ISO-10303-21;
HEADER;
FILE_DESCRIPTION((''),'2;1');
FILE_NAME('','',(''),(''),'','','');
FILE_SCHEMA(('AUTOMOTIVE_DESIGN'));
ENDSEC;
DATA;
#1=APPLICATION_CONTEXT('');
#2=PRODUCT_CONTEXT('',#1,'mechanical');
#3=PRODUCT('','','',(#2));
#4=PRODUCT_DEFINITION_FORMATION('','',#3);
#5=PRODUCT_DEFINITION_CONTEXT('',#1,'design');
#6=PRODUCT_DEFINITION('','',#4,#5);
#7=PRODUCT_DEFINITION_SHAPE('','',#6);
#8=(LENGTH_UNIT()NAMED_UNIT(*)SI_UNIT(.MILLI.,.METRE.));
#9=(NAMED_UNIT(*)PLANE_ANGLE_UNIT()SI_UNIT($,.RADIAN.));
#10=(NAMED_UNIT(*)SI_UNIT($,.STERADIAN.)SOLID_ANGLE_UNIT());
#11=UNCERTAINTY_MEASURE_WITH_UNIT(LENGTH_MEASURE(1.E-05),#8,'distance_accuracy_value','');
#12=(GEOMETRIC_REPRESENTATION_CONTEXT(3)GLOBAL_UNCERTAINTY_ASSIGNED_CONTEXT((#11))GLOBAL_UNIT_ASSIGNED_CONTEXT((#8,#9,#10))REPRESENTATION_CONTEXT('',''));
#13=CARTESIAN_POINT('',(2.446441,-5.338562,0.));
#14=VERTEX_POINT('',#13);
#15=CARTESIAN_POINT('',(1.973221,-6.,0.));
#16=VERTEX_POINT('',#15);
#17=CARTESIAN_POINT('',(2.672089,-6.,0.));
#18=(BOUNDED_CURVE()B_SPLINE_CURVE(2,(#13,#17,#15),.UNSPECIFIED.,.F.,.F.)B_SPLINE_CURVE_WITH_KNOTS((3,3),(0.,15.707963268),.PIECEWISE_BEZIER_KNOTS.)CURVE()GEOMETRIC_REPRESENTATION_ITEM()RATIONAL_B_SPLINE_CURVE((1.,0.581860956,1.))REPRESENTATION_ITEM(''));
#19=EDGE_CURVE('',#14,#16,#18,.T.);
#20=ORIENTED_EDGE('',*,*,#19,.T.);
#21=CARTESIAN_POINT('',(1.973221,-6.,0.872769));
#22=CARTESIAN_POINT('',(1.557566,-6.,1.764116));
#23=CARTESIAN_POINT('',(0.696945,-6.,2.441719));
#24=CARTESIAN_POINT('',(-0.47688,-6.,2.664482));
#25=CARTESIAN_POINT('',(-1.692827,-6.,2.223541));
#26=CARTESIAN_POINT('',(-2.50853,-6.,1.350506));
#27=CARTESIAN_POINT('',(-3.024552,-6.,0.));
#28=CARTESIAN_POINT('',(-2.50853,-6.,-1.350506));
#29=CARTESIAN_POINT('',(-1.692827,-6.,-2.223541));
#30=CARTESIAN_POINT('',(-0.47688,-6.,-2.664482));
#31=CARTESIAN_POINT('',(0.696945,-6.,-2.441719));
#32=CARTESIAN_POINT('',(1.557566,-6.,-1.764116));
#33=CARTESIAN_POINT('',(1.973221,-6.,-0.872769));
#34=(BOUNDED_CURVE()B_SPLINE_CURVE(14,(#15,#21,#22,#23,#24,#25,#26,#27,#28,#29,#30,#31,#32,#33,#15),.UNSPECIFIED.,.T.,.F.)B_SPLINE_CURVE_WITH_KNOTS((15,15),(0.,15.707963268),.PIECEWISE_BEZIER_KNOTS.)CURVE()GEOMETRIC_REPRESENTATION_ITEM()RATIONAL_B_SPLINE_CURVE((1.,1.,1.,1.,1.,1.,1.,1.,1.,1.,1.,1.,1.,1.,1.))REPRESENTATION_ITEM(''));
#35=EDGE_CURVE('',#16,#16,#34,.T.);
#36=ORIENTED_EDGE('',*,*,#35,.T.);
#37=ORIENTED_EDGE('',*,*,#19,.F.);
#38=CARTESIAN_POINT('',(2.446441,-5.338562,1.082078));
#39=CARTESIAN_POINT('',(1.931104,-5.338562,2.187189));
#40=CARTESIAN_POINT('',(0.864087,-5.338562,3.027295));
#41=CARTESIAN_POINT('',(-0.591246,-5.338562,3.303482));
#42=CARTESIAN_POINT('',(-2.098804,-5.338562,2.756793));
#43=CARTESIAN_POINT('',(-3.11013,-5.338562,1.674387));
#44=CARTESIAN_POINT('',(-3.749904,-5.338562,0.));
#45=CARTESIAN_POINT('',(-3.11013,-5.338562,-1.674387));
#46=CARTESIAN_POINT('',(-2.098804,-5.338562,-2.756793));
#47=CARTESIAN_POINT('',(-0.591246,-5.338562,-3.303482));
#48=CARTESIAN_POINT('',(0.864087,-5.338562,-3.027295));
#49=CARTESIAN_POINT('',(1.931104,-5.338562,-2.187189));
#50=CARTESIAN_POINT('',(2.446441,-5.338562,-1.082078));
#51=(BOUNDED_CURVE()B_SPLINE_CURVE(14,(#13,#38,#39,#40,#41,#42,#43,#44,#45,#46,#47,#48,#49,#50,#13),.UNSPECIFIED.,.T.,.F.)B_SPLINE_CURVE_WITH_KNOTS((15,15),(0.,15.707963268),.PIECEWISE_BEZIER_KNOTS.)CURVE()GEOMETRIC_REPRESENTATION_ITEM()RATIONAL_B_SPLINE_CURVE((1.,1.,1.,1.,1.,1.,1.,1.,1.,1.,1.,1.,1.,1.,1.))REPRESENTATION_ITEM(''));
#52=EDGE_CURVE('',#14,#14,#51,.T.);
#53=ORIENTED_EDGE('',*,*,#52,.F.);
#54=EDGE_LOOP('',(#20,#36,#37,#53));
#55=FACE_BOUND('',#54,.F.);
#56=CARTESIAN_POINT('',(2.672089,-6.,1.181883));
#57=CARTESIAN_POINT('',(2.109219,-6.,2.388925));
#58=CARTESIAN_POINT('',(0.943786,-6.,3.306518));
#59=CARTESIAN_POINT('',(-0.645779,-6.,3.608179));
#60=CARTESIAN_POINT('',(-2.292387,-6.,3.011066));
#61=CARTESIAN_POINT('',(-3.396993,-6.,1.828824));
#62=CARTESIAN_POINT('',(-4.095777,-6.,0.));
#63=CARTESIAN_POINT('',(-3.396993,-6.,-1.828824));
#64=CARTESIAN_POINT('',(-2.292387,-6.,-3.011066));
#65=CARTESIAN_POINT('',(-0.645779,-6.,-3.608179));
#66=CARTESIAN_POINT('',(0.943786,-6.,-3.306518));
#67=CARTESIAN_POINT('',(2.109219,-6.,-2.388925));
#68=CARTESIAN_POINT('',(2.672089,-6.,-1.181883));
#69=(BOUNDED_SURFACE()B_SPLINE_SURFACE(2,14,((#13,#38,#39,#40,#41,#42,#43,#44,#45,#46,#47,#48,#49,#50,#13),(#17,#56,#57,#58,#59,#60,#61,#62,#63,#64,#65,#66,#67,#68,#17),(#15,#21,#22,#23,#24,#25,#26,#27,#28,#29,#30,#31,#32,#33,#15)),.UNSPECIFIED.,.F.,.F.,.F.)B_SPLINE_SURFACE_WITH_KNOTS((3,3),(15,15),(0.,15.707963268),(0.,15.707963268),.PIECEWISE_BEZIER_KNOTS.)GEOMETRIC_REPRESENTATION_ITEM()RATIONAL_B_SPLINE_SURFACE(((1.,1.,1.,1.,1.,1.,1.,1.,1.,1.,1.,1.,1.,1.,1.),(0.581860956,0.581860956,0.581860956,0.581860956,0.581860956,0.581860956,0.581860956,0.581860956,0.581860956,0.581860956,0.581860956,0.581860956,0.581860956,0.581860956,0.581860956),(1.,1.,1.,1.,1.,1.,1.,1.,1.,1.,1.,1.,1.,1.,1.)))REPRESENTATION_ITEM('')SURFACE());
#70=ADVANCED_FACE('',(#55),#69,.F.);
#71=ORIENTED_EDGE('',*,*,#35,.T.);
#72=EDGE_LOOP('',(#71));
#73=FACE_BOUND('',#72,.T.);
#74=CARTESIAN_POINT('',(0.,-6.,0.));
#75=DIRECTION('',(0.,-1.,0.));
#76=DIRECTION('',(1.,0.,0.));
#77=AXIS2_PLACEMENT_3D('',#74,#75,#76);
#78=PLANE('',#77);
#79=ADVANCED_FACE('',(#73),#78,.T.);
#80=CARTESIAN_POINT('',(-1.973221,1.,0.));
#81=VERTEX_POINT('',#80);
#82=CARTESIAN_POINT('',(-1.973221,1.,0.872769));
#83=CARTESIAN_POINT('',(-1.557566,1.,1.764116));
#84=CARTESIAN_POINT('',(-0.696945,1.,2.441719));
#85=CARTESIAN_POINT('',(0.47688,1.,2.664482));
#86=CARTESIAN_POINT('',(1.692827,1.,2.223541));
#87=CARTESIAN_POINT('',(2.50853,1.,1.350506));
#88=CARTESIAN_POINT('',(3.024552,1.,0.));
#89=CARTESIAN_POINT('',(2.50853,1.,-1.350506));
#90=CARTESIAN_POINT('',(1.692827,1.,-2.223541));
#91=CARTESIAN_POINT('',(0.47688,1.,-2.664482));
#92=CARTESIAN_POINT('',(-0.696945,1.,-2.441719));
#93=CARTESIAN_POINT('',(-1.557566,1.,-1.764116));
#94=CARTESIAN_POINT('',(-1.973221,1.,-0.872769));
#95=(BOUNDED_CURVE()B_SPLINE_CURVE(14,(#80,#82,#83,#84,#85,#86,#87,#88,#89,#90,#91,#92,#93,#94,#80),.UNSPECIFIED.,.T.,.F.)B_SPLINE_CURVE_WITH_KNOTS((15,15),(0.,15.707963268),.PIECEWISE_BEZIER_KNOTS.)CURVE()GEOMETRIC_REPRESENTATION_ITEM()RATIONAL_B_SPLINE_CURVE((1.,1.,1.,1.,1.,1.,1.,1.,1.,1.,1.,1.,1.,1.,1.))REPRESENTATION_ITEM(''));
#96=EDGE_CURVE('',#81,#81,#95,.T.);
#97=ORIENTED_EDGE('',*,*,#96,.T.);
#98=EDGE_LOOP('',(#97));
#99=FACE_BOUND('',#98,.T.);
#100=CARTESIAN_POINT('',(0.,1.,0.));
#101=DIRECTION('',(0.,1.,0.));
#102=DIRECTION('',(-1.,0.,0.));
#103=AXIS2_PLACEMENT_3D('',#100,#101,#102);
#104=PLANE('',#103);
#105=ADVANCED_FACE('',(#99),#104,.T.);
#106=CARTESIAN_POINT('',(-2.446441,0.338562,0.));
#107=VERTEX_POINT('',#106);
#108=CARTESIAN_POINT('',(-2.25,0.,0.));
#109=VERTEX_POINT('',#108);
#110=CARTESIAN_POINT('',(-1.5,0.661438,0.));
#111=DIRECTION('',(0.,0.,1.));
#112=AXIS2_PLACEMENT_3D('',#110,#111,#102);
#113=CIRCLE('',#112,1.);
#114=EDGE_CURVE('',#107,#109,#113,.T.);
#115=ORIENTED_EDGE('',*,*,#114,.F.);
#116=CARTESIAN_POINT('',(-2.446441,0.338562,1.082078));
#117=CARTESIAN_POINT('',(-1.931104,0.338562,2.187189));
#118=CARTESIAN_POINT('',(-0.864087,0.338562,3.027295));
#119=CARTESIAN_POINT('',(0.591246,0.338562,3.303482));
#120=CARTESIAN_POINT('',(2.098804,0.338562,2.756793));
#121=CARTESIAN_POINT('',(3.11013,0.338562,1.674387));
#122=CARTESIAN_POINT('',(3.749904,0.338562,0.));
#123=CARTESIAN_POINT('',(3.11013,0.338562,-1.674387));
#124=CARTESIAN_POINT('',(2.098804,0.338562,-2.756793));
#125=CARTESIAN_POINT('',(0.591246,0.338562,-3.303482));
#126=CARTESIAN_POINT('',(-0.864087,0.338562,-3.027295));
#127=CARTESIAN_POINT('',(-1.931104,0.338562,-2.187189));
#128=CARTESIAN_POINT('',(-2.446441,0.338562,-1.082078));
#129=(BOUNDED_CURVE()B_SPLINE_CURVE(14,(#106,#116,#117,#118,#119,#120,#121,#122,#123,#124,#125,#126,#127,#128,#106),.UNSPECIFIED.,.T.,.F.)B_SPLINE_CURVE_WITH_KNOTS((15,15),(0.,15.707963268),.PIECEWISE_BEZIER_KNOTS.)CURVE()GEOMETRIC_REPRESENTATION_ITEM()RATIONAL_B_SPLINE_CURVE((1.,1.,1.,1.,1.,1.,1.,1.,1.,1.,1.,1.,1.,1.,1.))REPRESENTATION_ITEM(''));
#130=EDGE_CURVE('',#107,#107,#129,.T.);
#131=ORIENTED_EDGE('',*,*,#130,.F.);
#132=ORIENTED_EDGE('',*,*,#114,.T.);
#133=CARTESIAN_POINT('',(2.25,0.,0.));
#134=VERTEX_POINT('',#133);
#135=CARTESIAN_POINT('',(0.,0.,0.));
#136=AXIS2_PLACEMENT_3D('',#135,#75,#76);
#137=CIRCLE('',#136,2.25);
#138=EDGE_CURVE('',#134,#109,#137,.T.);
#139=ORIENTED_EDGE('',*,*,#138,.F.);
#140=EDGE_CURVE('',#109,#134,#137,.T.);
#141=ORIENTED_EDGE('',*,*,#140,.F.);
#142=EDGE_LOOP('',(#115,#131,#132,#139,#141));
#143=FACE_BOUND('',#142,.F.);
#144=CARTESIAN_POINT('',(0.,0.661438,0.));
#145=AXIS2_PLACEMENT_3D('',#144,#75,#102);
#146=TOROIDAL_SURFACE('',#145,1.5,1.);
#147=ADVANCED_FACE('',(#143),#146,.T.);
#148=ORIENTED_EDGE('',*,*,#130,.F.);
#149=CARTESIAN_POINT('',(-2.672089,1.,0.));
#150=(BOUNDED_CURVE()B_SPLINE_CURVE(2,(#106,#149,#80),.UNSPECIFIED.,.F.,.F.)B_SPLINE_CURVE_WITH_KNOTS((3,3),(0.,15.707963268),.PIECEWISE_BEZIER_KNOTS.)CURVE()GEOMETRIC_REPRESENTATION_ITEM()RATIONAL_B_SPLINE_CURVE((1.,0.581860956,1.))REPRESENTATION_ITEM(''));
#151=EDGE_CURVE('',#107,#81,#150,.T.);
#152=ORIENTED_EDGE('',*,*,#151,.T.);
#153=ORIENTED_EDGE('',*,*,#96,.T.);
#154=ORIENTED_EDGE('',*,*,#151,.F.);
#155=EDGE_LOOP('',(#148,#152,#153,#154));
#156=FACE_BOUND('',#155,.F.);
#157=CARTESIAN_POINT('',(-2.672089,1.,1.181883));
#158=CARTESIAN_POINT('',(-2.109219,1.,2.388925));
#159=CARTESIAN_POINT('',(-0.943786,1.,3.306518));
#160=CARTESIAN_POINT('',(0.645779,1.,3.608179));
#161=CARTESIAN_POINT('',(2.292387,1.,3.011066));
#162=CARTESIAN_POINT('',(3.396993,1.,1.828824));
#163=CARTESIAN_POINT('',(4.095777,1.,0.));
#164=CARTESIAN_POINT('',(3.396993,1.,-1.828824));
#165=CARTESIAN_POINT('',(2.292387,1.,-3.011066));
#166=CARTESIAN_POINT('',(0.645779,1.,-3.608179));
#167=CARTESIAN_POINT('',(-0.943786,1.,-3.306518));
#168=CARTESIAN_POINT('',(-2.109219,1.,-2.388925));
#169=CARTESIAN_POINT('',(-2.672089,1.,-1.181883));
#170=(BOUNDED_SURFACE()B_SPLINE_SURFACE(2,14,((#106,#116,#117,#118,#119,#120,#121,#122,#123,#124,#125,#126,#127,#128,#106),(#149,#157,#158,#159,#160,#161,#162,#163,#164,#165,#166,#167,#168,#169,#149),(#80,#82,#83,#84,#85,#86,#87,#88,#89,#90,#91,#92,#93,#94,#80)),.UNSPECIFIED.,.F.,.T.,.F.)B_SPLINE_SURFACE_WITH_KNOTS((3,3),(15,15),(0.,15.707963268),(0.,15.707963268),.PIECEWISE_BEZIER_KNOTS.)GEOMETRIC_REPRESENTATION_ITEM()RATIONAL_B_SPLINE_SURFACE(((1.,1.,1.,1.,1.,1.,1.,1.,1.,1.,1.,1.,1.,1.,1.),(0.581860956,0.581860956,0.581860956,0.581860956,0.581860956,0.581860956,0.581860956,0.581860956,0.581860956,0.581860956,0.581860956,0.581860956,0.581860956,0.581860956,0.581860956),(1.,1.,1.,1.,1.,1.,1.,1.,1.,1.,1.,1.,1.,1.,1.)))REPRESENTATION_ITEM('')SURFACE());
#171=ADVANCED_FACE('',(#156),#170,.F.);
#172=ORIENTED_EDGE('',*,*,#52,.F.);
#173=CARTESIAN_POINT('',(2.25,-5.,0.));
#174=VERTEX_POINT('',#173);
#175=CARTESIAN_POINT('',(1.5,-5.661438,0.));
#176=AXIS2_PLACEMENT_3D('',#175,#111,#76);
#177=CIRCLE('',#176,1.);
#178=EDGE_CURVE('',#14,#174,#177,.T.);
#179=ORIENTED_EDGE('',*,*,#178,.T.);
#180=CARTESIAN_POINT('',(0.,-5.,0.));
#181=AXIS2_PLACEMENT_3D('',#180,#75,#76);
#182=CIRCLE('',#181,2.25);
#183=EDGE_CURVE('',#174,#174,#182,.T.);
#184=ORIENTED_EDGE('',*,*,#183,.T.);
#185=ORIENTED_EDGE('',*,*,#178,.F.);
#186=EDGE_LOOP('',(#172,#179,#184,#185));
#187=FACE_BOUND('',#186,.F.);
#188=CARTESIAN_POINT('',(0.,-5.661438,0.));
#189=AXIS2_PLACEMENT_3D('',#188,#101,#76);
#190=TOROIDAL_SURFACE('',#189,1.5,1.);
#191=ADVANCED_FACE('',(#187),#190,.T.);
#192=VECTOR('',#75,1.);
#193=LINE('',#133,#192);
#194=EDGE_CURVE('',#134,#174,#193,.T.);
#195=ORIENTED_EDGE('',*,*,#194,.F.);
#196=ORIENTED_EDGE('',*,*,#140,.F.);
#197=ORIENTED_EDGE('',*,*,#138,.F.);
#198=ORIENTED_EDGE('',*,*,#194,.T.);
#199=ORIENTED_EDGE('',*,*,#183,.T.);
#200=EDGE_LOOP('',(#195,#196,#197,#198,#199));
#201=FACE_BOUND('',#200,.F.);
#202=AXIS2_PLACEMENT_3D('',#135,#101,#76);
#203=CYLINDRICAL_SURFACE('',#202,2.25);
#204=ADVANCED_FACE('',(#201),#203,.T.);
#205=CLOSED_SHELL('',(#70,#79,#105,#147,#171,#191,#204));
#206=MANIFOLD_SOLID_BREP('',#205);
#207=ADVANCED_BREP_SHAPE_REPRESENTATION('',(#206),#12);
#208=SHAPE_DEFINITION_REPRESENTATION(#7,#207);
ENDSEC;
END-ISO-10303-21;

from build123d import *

# Parameters (mm, degrees)
F0_R     = 2.25
F1_DEPTH = 5
F2_R     = 2.5
F2_R_2   = 2.25
F3_DEPTH = 1
F5_R     = 0.5
F6_R     = 2.5
F6_R_2   = 2.25
F7_DEPTH = 1
F9_R     = 0.5


# Not quite as in the source:
# - a fillet or chamfer that OpenCascade refuses, or shapes differently, is made with other operations: its cross-section is extruded or revolved along the edge and cut away or added


with BuildPart() as f1:
    # F0 (on Front) → F1 (new body)
    with BuildSketch(Plane.XZ):
        Circle(F0_R)
    extrude(amount=F1_DEPTH)

    # F2 (on face) → F3 (join)
    with BuildSketch(Plane.XZ.offset(5)):
        Circle(F2_R)
        Circle(F2_R_2, mode=Mode.SUBTRACT)
        Circle(F2_R_2)
    extrude(amount=F3_DEPTH)

    # F4: fillet of radius 1 on 1 edges, made by hand

    # F4_s1 → F4_t2 (revolve, cut)
    with BuildSketch(Plane.XY):
        with BuildLine():
            ThreePointArc((2.5, -5.6614378278), (2.4354143467, -5.3078844372), (2.25, -5))
            Line((2.25, -5), (2.5, -5))
            Line((2.5, -5), (2.5, -5.6614378278))
        make_face()
    revolve(axis=Axis((0, -5, 0), (0, -1, 0)), mode=Mode.SUBTRACT)

    # F5
    f5_edges = [f1.edges().sort_by_distance(p)[0] for p in [
        (-2.5, -6, 0),
    ]]
    fillet(f5_edges, radius=F5_R)

    # F6 (on face) → F7 (join)
    with BuildSketch(Plane(origin=(0, 0, 0), x_dir=(-1, 0, 0), z_dir=(0, 1, 0))):
        Circle(F6_R)
        Circle(F6_R_2, mode=Mode.SUBTRACT)
        Circle(F6_R_2)
    extrude(amount=F7_DEPTH)

    # F8: fillet of radius 1 on 1 edges, made by hand

    # F8_s1 → F8_t2 (revolve, cut)
    with BuildSketch(Plane.XY):
        with BuildLine():
            ThreePointArc((-2.5, 0.6614378278), (-2.4354143467, 0.3078844372), (-2.25, 0))
            Line((-2.25, 0), (-2.5, 0))
            Line((-2.5, 0), (-2.5, 0.6614378278))
        make_face()
    revolve(axis=Axis((0, 0, 0), (0, 1, 0)), mode=Mode.SUBTRACT)

    # F9
    f9_edges = [f1.edges().sort_by_distance(p)[0] for p in [
        (2.5, 1, 0),
    ]]
    fillet(f9_edges, radius=F9_R)


solid = f1.part
